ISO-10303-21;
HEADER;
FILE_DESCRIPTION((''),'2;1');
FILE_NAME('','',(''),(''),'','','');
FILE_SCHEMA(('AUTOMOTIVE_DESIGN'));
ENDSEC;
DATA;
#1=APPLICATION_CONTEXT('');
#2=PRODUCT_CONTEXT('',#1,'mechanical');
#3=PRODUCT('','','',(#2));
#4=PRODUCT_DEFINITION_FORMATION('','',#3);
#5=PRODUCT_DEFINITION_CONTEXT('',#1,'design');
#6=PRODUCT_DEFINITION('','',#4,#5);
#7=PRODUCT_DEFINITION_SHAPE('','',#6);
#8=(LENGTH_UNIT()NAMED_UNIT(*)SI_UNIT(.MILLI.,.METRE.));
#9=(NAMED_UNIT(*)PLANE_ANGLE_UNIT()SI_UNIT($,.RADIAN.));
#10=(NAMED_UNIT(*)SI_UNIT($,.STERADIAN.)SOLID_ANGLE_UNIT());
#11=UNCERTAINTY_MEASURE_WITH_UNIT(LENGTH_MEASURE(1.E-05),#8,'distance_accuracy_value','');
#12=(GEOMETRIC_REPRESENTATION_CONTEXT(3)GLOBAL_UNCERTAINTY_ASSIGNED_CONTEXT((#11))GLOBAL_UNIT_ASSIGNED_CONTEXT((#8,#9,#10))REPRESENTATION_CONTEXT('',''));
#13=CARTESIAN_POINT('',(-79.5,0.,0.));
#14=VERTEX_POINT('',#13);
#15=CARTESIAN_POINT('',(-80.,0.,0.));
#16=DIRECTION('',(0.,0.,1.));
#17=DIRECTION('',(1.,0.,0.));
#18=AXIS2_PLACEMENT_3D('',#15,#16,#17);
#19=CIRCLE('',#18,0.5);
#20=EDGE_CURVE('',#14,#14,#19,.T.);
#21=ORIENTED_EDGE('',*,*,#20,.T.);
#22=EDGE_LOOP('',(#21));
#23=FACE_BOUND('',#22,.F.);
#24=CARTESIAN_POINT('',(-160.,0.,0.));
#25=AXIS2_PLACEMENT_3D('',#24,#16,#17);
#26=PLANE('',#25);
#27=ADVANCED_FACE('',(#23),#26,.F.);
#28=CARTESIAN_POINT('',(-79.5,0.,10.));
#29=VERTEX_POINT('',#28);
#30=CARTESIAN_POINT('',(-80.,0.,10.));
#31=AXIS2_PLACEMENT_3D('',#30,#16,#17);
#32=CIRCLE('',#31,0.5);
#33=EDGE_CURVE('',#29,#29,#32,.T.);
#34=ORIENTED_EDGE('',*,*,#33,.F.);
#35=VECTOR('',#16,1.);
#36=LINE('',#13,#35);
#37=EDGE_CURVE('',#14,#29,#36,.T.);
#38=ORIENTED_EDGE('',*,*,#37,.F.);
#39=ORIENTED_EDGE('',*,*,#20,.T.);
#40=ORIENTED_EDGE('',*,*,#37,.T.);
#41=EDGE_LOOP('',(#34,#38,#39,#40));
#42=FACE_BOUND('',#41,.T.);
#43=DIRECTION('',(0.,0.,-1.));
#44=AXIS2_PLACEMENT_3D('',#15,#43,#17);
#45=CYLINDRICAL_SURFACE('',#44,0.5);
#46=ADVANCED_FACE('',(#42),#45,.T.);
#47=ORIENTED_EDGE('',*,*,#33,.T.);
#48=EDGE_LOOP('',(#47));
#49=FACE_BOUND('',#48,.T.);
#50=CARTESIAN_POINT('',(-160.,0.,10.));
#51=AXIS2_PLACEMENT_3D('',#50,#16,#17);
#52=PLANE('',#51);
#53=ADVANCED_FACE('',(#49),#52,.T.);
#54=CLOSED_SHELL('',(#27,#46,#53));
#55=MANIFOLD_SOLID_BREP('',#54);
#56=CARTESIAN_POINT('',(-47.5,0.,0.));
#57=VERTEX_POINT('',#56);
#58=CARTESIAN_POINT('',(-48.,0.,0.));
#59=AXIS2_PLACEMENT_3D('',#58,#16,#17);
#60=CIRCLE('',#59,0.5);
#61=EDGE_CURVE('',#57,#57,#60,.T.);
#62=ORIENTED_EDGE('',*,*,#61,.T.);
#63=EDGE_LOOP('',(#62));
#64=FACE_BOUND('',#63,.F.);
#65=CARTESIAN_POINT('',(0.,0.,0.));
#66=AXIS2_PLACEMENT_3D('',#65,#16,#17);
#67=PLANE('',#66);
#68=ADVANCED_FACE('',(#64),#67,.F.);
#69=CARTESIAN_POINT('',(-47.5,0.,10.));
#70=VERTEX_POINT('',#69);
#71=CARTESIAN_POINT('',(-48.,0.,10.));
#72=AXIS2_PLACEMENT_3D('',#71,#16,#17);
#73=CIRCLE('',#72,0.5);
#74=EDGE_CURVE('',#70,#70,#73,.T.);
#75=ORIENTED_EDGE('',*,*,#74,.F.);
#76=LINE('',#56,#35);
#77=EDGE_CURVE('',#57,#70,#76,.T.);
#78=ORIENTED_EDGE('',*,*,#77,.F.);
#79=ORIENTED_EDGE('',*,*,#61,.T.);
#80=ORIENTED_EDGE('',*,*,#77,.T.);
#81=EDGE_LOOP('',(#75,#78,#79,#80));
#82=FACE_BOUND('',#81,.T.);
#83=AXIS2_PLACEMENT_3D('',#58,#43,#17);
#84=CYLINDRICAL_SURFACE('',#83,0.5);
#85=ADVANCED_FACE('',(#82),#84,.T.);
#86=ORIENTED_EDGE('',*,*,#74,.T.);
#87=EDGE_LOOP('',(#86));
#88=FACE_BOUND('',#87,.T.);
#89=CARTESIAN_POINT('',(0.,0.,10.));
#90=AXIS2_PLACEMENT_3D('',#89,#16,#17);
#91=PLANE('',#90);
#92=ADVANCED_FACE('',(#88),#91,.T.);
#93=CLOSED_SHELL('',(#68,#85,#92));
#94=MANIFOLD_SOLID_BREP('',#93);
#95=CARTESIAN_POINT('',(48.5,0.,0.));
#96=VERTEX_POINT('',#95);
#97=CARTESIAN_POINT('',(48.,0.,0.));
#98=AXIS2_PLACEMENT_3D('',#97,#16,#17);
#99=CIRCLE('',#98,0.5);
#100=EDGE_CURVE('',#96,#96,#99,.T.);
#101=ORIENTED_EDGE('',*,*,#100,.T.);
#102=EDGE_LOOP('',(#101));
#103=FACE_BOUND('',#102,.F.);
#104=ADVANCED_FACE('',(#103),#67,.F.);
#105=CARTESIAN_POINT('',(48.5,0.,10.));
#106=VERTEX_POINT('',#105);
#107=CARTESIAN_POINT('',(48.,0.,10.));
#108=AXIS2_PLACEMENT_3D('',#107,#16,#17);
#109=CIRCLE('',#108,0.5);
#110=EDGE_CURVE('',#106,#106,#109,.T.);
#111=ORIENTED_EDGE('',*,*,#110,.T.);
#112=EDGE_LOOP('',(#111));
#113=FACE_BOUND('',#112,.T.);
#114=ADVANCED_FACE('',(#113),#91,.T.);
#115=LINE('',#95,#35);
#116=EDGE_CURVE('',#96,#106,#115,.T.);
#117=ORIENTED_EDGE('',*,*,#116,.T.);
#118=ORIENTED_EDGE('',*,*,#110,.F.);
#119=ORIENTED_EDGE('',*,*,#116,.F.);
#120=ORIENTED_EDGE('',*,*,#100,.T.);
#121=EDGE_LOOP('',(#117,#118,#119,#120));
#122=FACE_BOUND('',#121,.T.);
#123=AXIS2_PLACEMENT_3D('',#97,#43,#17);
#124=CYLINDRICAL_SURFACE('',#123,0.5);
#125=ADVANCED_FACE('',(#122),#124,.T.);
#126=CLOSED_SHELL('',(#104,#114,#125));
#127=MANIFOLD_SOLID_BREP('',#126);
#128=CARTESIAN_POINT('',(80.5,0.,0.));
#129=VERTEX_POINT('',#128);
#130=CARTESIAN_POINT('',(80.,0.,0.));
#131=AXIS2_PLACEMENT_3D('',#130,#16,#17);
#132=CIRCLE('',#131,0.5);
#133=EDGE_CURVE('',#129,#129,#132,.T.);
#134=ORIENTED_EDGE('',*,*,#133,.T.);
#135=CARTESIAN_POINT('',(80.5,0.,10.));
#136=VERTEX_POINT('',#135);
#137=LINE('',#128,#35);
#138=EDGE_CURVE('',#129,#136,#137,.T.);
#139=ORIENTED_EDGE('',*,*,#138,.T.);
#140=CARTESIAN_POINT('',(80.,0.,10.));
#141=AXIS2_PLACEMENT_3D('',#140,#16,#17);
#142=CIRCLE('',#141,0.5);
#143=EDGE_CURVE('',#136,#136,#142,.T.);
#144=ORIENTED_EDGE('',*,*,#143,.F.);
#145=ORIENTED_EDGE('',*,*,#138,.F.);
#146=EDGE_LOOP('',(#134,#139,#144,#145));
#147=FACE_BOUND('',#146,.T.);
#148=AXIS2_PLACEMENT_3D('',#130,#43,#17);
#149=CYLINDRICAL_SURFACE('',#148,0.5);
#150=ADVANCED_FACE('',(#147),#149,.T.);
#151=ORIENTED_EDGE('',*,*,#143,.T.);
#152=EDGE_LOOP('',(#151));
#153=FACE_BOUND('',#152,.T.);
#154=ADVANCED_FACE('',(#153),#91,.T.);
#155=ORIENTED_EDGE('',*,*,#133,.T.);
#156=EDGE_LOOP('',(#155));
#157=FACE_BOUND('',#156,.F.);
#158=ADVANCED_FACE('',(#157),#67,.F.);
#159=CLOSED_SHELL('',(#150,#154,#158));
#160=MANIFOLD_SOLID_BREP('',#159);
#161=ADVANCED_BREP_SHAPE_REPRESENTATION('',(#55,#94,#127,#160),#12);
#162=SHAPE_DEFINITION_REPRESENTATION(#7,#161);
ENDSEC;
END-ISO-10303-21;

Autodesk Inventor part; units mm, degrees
ref_plane "YZ Plane" through (0, 0, 0) normal (1, 0, 0) x (0, 1, 0)
ref_plane "XZ Plane" through (0, 0, 0) normal (0, 1, 0) x (-1, 0, 0)
ref_plane "XY Plane" through (0, 0, 0) normal (0, 0, 1) x (1, 0, 0)
sketch "Sketch1" plane through (0, 0, 0) normal (0, 0, 1) x (1, 0, 0)
  line L0 (-150, -11.5) -> (150, -11.5)
  line L1 (150, -11.5) -> (150, 11.5)
  line L2 (150, 11.5) -> (-150, 11.5)
  line L3 (-150, 11.5) -> (-150, -11.5)
  line L4 (-150, -11.5) -> (150, 11.5) construction
  line L5 (150, -11.5) -> (-150, 11.5) construction
  point P0 (0, 0)
  dimension "d0" = 300
  dimension "d1" = 23
sketch "Sketch2" plane through (0, 0, 0) normal (0, 0, 1) x (1, 0, 0)
  circle A0 centre (80, 0) radius 0.5
  line L0 (150, 11.5) -> (-150, 11.5) projected
  line L1 (-150, -11.5) -> (150, -11.5) projected
  line L2 (0, -16.1) -> (0, 16.1) projected
  line L3 (150, -11.5) -> (150, 11.5) projected
  point P0 (0, 0)
  dimension "d3" = 11.5
  dimension "d4" = 1
  dimension "d26" = 70
extrude "Extrusion1" add sketch "Sketch2" along normal blind 10 contours A0
pattern_linear "Minifix Array" count 2 spacing 160 along (-1, 0, 0) of "Extrusion1"
sketch "Sketch3" plane through (0, 0, 0) normal (0, 0, 1) x (1, 0, 0)
  circle A0 centre (48, 0) radius 0.5
  circle A1 centre (80, 0) radius 0.5 projected
  point P0 (0, 0)
  dimension "OffsetForGreen" = 32
extrude "Extrusion2" add sketch "Sketch3" along normal blind 10 separate body contours A0
pattern_of_one "Left Dowel Array" bodies 2
sketch "Sketch4" plane through (0, 0, 0) normal (0, 0, 1) x (1, 0, 0)
  line L0 (-150, 11.5) -> (-150, -11.5) projected
  circle A0 centre (-48, 0) radius 0.5
  circle A1 centre (80, 0) radius 0.5 projected
  line L1 (150, -11.5) -> (150, 11.5) projected
  line L2 (150, -16.9659) -> (150, 19.2384)
  circle A2 centre (48, 0) radius 0.5 projected
  point P0 (0, 0)
  dimension "OffsetForYellow" = 198
  dimension "OffsetForRefLine" = 70
extrude "Extrusion3" add sketch "Sketch4" along normal blind 10 separate body contours A0
pattern_of_one "Right Dowel Array" bodies 3
equation "\"d3\" = Y_Coord"
equation "\"d26\" = X_Coord"
equation "\"d9\" = Step"
equation "\"d16\" = Step"
equation "\"d23\" = Step"
equation "\"d0\" = ContactPatchWidth"
equation "\"d1\" = ContactPatchHeight"
equation "\"ContactPatchWidth\" = 300"
equation "\"ContactPatchHeight\" = 23"
equation "\"PlacingStep\" = 32"
equation "\"X_Coord\" = 70"
equation "\"Step\" = 160"
equation "\"Y_Coord\" = 11.5"
equation "\"MaxDistBetweenByStep\" = 192"
properties part number "Minfix&Dowel Joint"
